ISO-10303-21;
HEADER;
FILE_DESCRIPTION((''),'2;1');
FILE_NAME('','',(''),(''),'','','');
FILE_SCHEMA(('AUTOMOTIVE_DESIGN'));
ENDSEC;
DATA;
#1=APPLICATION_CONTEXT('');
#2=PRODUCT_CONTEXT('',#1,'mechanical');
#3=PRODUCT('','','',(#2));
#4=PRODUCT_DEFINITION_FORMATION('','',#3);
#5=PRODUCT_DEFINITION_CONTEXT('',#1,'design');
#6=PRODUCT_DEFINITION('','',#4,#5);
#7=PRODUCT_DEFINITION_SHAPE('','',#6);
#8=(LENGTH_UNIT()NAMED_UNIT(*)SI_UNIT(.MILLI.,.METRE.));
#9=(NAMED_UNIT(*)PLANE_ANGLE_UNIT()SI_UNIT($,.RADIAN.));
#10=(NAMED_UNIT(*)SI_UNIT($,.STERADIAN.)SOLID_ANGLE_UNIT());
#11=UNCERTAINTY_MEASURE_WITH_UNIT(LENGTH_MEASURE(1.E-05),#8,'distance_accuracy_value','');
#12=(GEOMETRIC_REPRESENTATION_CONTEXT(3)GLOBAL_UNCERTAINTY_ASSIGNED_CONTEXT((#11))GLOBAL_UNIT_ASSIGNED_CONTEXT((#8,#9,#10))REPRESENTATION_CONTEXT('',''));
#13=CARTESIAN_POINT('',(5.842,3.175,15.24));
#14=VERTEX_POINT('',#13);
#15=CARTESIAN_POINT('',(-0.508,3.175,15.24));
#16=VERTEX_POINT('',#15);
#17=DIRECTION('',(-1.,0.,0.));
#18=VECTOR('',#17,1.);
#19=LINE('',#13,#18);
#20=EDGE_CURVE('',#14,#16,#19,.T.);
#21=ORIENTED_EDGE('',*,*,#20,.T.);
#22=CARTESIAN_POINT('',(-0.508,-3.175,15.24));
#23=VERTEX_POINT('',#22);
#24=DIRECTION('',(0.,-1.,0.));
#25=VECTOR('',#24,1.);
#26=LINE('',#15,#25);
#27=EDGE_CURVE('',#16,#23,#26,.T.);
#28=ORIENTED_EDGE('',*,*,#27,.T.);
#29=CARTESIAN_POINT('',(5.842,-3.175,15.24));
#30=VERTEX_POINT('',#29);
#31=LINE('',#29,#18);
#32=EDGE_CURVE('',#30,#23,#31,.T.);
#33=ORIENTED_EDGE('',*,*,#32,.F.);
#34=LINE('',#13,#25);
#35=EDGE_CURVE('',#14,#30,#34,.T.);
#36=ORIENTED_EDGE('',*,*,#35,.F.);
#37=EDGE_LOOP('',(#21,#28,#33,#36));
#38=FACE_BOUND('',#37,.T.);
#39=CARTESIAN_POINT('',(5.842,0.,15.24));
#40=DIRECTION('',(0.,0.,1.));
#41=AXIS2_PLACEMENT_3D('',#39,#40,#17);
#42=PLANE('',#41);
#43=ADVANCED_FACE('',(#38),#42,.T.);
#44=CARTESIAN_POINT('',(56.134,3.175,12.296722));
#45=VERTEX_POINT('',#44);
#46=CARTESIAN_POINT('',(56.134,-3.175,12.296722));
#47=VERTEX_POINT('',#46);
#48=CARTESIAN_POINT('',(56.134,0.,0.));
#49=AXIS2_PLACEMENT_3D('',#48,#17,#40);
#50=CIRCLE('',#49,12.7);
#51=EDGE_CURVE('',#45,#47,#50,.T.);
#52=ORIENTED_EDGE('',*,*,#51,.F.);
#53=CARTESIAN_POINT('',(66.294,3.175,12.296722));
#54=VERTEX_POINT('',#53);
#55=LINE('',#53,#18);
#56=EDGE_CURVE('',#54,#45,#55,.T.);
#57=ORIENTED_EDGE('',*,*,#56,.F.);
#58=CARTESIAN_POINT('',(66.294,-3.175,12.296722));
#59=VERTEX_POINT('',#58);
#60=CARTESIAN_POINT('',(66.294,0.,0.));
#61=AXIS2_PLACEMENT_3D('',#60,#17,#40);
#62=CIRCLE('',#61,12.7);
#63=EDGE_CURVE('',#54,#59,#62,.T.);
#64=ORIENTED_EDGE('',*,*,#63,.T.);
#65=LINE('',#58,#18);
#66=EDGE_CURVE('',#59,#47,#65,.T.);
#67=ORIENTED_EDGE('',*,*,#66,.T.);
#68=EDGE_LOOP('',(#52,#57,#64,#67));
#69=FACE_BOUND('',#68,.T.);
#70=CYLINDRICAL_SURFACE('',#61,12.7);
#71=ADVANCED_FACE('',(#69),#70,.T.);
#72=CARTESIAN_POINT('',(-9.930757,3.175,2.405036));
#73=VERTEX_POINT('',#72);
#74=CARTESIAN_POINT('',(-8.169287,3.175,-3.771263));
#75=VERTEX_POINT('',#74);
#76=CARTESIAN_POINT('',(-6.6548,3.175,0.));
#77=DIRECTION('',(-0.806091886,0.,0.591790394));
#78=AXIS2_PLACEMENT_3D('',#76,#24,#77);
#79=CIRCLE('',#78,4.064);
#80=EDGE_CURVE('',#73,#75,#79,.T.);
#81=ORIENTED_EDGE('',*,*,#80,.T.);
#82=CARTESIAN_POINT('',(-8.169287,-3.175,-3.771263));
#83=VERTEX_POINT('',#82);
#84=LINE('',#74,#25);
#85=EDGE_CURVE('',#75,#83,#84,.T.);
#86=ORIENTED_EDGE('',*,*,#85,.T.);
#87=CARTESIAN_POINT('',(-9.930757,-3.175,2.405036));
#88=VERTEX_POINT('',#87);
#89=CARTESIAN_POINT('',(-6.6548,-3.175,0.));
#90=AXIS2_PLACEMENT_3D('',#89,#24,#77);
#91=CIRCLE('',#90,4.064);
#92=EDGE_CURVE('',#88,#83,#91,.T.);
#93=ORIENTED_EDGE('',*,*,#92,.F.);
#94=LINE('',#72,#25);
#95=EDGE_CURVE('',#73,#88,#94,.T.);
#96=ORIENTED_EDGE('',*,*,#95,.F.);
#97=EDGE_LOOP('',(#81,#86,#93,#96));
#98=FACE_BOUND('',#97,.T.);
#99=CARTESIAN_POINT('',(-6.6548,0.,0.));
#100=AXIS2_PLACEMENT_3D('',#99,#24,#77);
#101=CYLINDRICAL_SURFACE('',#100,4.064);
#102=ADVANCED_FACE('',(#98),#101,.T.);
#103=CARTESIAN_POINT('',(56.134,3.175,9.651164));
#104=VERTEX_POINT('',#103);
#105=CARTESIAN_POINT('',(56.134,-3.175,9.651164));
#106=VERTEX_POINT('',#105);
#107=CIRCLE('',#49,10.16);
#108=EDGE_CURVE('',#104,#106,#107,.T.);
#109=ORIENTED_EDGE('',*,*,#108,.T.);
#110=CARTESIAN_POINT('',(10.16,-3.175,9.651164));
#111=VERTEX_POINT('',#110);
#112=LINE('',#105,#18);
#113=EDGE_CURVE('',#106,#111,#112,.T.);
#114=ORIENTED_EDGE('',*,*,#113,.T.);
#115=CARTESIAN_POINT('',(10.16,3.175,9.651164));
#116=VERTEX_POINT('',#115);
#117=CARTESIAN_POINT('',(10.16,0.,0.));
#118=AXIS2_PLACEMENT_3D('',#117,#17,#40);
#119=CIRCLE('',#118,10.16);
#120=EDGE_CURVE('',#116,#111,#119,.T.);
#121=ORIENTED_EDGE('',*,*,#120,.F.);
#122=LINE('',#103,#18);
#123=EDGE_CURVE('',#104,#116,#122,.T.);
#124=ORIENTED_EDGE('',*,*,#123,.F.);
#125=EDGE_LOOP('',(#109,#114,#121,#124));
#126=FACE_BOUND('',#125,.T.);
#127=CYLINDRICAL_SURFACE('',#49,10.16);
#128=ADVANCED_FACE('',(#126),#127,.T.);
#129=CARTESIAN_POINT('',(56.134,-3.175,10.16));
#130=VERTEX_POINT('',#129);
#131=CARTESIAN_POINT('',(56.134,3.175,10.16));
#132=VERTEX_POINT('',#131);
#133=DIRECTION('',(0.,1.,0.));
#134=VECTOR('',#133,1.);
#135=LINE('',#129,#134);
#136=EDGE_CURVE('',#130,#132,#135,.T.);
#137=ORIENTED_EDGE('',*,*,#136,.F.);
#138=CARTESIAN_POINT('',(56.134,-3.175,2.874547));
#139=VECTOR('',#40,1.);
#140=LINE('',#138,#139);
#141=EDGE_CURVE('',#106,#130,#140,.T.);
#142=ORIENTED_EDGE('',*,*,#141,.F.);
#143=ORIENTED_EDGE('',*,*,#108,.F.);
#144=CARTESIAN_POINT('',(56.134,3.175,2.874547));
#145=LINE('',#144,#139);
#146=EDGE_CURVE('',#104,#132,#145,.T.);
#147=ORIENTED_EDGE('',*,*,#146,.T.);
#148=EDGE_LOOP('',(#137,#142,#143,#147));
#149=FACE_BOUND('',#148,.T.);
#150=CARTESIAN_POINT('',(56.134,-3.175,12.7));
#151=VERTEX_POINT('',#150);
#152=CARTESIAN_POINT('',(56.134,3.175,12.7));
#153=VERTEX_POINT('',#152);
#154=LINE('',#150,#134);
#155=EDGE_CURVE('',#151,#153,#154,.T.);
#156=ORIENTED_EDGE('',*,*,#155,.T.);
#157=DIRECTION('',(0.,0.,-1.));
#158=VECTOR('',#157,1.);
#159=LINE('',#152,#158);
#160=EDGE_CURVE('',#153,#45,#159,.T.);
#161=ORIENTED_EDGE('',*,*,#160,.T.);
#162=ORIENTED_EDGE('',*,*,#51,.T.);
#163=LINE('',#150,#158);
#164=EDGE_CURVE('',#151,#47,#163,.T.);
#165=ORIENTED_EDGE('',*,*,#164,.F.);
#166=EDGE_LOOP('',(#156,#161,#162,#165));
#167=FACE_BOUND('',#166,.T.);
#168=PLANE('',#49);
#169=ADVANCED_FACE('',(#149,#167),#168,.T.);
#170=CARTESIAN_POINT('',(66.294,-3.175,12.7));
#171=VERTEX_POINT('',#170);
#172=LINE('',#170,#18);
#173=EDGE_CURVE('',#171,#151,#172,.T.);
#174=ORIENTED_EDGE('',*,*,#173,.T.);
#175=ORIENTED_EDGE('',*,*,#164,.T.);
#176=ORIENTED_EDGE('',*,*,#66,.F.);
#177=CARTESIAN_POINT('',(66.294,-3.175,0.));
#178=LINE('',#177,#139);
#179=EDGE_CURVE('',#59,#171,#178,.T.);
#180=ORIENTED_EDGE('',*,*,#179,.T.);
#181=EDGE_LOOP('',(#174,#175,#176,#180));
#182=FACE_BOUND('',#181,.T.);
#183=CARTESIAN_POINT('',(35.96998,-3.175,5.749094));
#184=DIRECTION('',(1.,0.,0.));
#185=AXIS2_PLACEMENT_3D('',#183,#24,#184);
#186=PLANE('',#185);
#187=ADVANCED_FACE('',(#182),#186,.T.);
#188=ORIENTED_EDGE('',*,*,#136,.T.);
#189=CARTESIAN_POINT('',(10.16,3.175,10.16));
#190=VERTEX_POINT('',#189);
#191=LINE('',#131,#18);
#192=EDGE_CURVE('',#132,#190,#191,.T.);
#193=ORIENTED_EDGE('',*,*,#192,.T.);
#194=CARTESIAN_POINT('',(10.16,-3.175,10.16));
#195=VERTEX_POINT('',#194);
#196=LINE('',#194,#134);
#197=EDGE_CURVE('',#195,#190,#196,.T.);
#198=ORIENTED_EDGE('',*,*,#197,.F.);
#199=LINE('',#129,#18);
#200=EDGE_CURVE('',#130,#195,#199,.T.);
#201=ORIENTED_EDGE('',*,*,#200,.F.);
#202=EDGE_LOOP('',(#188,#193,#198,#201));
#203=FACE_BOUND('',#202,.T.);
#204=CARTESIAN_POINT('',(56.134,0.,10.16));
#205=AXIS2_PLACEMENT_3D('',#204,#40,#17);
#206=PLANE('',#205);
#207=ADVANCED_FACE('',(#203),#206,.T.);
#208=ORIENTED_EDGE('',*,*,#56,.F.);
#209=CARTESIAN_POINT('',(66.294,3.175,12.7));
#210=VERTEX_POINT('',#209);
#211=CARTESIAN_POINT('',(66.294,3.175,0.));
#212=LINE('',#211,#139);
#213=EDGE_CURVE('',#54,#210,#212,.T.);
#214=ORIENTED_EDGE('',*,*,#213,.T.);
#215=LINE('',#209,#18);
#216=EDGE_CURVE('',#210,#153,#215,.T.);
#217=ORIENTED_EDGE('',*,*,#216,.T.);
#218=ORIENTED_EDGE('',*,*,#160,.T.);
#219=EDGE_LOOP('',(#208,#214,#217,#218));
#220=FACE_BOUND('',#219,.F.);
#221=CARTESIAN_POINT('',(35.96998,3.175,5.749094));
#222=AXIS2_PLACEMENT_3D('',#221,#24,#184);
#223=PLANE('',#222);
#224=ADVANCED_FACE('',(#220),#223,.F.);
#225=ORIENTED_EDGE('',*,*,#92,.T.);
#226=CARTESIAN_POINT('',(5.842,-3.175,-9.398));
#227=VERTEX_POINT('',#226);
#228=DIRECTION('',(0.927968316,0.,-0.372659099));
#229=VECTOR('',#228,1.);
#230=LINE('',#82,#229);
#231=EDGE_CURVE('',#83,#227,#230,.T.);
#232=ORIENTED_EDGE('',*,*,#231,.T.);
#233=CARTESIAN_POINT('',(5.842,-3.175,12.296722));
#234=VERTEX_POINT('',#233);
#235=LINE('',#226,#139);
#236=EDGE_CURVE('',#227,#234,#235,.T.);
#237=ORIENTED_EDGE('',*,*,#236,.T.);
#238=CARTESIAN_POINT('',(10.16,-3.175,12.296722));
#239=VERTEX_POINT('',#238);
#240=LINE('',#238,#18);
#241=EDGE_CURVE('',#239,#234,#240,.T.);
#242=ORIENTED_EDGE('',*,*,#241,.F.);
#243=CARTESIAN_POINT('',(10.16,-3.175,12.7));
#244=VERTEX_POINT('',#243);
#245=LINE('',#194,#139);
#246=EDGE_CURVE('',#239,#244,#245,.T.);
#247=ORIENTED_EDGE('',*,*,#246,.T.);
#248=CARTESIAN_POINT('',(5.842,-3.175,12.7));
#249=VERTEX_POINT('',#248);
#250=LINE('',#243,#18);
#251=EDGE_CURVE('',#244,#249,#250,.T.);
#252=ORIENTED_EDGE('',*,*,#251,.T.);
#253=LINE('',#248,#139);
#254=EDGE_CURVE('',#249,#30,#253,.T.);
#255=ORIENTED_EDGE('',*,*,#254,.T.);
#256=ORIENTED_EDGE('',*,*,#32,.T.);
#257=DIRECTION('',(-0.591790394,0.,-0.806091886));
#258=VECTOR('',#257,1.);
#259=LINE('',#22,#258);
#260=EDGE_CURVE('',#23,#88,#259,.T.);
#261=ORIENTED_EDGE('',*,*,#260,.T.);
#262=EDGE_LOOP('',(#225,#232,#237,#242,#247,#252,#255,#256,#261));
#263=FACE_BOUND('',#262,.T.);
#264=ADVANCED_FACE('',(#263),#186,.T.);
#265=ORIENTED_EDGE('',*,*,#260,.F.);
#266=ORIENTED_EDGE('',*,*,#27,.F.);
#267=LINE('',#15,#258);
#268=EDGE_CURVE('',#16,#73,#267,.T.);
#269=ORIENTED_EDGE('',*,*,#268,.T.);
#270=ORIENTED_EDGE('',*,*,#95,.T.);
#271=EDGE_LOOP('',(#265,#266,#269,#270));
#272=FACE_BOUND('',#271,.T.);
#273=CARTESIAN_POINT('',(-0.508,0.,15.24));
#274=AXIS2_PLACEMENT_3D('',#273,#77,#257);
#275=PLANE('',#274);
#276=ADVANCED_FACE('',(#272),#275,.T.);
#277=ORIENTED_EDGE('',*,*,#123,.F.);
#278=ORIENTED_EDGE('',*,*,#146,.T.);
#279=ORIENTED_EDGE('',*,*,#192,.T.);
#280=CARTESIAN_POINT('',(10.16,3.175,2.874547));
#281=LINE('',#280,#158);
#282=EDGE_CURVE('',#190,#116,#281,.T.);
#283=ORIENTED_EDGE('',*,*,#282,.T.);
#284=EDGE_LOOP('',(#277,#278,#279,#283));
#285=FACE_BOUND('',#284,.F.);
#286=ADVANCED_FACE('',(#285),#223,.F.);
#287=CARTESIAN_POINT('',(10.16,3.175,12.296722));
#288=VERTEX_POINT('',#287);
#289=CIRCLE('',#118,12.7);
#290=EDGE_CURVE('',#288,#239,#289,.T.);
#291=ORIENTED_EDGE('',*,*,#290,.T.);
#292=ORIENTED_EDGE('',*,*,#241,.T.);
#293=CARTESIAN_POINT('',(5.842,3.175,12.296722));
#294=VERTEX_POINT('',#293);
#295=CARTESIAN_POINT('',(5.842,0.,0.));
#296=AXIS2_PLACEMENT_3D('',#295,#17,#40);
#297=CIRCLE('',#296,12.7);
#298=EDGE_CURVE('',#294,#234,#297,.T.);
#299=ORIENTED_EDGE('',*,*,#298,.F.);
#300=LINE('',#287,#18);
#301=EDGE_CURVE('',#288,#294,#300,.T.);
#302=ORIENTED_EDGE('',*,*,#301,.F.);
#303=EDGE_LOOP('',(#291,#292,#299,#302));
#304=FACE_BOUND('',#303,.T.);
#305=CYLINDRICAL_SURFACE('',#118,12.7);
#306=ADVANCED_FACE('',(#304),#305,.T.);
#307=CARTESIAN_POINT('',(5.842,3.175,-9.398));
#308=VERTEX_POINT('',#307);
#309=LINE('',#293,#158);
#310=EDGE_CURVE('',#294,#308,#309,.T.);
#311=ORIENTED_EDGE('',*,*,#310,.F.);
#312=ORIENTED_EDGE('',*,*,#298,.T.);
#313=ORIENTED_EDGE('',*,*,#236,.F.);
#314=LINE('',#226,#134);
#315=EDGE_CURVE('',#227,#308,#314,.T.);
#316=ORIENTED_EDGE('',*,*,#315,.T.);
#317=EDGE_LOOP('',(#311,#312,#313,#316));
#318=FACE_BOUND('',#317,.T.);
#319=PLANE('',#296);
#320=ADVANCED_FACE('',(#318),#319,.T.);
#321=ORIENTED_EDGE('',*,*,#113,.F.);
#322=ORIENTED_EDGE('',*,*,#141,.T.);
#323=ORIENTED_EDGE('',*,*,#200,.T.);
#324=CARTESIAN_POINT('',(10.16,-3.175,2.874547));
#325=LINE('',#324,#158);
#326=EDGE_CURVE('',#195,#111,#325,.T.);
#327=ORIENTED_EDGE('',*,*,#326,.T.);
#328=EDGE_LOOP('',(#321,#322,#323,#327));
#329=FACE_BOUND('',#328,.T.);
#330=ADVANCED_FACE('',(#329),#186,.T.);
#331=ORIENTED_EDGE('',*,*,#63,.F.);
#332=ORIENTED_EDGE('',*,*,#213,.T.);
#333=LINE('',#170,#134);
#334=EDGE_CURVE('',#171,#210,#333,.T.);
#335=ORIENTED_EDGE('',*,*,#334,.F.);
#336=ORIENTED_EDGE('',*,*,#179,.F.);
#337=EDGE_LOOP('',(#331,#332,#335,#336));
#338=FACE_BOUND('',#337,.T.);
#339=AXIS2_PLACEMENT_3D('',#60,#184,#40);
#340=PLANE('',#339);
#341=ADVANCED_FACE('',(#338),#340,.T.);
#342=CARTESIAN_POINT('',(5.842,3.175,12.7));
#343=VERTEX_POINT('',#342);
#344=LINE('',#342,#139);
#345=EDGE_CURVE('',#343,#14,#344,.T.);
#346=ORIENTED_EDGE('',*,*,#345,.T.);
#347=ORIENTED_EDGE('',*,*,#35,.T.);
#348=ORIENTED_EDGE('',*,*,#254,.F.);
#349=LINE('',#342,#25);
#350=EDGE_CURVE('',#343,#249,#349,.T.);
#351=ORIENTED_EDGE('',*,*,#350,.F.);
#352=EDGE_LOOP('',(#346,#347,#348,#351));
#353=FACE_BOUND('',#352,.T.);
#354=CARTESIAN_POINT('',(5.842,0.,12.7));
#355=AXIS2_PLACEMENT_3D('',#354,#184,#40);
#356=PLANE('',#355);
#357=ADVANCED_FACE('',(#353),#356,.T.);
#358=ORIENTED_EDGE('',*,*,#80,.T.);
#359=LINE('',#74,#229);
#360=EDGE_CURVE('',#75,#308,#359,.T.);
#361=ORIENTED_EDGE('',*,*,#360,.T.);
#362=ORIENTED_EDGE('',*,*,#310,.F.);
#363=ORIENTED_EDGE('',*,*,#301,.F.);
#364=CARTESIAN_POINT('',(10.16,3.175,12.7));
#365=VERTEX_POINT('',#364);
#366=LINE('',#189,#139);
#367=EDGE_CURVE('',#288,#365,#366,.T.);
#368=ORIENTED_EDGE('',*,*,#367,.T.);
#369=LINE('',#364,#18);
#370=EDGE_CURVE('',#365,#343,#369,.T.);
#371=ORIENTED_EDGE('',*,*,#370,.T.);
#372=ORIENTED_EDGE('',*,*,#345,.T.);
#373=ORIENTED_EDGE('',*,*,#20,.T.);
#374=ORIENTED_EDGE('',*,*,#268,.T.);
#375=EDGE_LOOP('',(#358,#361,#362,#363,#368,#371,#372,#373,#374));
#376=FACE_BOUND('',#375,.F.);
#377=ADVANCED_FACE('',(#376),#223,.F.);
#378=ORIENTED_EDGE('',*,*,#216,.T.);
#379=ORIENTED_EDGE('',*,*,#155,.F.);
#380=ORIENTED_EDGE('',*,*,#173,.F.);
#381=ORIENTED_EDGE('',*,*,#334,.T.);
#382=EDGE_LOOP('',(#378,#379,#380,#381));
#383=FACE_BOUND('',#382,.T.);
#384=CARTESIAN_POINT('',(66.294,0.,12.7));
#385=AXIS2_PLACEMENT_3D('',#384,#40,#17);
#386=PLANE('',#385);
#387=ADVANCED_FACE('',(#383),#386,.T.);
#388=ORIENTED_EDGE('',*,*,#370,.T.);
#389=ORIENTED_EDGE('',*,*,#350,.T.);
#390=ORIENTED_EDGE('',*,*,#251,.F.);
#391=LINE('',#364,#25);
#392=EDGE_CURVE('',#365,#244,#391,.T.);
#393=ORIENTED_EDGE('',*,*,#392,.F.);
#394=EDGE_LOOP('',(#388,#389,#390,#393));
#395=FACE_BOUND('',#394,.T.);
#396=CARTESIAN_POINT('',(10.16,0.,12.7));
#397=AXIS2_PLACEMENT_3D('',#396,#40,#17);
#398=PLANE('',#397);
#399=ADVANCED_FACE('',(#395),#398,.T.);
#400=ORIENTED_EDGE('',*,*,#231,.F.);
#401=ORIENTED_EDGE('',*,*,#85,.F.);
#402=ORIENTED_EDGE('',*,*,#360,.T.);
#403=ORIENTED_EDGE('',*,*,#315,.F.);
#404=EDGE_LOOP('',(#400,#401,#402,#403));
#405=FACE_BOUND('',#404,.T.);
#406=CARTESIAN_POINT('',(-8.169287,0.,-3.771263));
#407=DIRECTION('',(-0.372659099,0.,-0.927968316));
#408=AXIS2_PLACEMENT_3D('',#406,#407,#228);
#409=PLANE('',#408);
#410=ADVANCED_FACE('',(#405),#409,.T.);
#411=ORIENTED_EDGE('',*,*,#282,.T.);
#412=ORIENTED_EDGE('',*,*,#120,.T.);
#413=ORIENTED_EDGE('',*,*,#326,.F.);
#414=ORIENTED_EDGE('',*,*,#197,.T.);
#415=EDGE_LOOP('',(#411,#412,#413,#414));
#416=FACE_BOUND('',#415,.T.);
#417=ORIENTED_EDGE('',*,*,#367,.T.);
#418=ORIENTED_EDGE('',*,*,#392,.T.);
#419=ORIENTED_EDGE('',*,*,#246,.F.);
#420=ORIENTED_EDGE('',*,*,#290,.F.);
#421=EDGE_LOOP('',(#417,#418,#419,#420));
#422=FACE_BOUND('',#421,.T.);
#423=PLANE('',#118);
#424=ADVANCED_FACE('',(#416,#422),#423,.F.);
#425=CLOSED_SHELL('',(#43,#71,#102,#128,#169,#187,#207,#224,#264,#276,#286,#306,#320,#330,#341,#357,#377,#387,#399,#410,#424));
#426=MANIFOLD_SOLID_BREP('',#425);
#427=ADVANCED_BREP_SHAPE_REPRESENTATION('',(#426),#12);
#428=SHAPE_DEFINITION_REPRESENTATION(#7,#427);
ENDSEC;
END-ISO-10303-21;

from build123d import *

# Parameters (mm, degrees)
F0_W     = 5.842
F0_H     = 12.7
F0_R     = 1.524
F2_DEPTH = 3.175


with BuildPart() as f1:
    # F0 (on Front) → F1 (revolve)
    with BuildSketch(Plane.XZ):
        Polygon((5.842, 12.7), (5.842, 0), (66.294, 0), (66.294, 12.7), (56.134, 12.7), (56.134, 10.16), (10.16, 10.16), (10.16, 12.7), align=None)
    revolve(axis=Axis((33.147, 0, 0), (-1, 0, 0)))

    # F0 (on Front) → F2 (join, symmetric)
    with BuildSketch(Plane.XZ):
        Polygon((5.842, 12.7), (5.842, 0), (66.294, 0), (66.294, 12.7), (56.134, 12.7), (56.134, 10.16), (10.16, 10.16), (10.16, 12.7), align=None)
        with BuildLine():
            Line((-2.5908, 0), (0, 0))
            Line((0, 0), (0, 12.7))
            Line((0, 12.7), (5.842, 12.7))
            Line((5.842, 12.7), (5.842, 15.24))
            Line((5.842, 15.24), (-0.508, 15.24))
            Line((-0.508, 15.24), (-9.9307574264, 2.405036162))
            ThreePointArc((-9.9307574264, 2.405036162), (-5.3893741786, 3.8619675672), (-2.5908, 0))
        make_face()
        with Locations((2.921, 6.35)):
            Rectangle(F0_W, F0_H)
        with BuildLine():
            Line((5.842, 0), (0, 0))
            Line((0, 0), (-2.5908, 0))
            ThreePointArc((-2.5908, 0), (-4.3787043805, -3.3668211611), (-8.1692865802, -3.7712632364))
            Line((-8.1692865802, -3.7712632364), (5.842, -9.398))
            Line((5.842, -9.398), (5.842, 0))
        make_face()
        with BuildLine():
            ThreePointArc((-8.1692865802, -3.7712632364), (-4.3787043805, -3.3668211611), (-2.5908, 0))
            ThreePointArc((-2.5908, 0), (-5.3893741786, 3.8619675672), (-9.9307574264, 2.405036162))
            ThreePointArc((-9.9307574264, 2.405036162), (-10.5629654276, -1.1146026154), (-8.1692865802, -3.7712632364))
        make_face()
        with Locations((-6.6548, 0)):
            Circle(F0_R, mode=Mode.SUBTRACT)
        with Locations((-6.6548, 0)):
            Circle(F0_R)
    extrude(amount=F2_DEPTH, both=True)


solid = f1.part
